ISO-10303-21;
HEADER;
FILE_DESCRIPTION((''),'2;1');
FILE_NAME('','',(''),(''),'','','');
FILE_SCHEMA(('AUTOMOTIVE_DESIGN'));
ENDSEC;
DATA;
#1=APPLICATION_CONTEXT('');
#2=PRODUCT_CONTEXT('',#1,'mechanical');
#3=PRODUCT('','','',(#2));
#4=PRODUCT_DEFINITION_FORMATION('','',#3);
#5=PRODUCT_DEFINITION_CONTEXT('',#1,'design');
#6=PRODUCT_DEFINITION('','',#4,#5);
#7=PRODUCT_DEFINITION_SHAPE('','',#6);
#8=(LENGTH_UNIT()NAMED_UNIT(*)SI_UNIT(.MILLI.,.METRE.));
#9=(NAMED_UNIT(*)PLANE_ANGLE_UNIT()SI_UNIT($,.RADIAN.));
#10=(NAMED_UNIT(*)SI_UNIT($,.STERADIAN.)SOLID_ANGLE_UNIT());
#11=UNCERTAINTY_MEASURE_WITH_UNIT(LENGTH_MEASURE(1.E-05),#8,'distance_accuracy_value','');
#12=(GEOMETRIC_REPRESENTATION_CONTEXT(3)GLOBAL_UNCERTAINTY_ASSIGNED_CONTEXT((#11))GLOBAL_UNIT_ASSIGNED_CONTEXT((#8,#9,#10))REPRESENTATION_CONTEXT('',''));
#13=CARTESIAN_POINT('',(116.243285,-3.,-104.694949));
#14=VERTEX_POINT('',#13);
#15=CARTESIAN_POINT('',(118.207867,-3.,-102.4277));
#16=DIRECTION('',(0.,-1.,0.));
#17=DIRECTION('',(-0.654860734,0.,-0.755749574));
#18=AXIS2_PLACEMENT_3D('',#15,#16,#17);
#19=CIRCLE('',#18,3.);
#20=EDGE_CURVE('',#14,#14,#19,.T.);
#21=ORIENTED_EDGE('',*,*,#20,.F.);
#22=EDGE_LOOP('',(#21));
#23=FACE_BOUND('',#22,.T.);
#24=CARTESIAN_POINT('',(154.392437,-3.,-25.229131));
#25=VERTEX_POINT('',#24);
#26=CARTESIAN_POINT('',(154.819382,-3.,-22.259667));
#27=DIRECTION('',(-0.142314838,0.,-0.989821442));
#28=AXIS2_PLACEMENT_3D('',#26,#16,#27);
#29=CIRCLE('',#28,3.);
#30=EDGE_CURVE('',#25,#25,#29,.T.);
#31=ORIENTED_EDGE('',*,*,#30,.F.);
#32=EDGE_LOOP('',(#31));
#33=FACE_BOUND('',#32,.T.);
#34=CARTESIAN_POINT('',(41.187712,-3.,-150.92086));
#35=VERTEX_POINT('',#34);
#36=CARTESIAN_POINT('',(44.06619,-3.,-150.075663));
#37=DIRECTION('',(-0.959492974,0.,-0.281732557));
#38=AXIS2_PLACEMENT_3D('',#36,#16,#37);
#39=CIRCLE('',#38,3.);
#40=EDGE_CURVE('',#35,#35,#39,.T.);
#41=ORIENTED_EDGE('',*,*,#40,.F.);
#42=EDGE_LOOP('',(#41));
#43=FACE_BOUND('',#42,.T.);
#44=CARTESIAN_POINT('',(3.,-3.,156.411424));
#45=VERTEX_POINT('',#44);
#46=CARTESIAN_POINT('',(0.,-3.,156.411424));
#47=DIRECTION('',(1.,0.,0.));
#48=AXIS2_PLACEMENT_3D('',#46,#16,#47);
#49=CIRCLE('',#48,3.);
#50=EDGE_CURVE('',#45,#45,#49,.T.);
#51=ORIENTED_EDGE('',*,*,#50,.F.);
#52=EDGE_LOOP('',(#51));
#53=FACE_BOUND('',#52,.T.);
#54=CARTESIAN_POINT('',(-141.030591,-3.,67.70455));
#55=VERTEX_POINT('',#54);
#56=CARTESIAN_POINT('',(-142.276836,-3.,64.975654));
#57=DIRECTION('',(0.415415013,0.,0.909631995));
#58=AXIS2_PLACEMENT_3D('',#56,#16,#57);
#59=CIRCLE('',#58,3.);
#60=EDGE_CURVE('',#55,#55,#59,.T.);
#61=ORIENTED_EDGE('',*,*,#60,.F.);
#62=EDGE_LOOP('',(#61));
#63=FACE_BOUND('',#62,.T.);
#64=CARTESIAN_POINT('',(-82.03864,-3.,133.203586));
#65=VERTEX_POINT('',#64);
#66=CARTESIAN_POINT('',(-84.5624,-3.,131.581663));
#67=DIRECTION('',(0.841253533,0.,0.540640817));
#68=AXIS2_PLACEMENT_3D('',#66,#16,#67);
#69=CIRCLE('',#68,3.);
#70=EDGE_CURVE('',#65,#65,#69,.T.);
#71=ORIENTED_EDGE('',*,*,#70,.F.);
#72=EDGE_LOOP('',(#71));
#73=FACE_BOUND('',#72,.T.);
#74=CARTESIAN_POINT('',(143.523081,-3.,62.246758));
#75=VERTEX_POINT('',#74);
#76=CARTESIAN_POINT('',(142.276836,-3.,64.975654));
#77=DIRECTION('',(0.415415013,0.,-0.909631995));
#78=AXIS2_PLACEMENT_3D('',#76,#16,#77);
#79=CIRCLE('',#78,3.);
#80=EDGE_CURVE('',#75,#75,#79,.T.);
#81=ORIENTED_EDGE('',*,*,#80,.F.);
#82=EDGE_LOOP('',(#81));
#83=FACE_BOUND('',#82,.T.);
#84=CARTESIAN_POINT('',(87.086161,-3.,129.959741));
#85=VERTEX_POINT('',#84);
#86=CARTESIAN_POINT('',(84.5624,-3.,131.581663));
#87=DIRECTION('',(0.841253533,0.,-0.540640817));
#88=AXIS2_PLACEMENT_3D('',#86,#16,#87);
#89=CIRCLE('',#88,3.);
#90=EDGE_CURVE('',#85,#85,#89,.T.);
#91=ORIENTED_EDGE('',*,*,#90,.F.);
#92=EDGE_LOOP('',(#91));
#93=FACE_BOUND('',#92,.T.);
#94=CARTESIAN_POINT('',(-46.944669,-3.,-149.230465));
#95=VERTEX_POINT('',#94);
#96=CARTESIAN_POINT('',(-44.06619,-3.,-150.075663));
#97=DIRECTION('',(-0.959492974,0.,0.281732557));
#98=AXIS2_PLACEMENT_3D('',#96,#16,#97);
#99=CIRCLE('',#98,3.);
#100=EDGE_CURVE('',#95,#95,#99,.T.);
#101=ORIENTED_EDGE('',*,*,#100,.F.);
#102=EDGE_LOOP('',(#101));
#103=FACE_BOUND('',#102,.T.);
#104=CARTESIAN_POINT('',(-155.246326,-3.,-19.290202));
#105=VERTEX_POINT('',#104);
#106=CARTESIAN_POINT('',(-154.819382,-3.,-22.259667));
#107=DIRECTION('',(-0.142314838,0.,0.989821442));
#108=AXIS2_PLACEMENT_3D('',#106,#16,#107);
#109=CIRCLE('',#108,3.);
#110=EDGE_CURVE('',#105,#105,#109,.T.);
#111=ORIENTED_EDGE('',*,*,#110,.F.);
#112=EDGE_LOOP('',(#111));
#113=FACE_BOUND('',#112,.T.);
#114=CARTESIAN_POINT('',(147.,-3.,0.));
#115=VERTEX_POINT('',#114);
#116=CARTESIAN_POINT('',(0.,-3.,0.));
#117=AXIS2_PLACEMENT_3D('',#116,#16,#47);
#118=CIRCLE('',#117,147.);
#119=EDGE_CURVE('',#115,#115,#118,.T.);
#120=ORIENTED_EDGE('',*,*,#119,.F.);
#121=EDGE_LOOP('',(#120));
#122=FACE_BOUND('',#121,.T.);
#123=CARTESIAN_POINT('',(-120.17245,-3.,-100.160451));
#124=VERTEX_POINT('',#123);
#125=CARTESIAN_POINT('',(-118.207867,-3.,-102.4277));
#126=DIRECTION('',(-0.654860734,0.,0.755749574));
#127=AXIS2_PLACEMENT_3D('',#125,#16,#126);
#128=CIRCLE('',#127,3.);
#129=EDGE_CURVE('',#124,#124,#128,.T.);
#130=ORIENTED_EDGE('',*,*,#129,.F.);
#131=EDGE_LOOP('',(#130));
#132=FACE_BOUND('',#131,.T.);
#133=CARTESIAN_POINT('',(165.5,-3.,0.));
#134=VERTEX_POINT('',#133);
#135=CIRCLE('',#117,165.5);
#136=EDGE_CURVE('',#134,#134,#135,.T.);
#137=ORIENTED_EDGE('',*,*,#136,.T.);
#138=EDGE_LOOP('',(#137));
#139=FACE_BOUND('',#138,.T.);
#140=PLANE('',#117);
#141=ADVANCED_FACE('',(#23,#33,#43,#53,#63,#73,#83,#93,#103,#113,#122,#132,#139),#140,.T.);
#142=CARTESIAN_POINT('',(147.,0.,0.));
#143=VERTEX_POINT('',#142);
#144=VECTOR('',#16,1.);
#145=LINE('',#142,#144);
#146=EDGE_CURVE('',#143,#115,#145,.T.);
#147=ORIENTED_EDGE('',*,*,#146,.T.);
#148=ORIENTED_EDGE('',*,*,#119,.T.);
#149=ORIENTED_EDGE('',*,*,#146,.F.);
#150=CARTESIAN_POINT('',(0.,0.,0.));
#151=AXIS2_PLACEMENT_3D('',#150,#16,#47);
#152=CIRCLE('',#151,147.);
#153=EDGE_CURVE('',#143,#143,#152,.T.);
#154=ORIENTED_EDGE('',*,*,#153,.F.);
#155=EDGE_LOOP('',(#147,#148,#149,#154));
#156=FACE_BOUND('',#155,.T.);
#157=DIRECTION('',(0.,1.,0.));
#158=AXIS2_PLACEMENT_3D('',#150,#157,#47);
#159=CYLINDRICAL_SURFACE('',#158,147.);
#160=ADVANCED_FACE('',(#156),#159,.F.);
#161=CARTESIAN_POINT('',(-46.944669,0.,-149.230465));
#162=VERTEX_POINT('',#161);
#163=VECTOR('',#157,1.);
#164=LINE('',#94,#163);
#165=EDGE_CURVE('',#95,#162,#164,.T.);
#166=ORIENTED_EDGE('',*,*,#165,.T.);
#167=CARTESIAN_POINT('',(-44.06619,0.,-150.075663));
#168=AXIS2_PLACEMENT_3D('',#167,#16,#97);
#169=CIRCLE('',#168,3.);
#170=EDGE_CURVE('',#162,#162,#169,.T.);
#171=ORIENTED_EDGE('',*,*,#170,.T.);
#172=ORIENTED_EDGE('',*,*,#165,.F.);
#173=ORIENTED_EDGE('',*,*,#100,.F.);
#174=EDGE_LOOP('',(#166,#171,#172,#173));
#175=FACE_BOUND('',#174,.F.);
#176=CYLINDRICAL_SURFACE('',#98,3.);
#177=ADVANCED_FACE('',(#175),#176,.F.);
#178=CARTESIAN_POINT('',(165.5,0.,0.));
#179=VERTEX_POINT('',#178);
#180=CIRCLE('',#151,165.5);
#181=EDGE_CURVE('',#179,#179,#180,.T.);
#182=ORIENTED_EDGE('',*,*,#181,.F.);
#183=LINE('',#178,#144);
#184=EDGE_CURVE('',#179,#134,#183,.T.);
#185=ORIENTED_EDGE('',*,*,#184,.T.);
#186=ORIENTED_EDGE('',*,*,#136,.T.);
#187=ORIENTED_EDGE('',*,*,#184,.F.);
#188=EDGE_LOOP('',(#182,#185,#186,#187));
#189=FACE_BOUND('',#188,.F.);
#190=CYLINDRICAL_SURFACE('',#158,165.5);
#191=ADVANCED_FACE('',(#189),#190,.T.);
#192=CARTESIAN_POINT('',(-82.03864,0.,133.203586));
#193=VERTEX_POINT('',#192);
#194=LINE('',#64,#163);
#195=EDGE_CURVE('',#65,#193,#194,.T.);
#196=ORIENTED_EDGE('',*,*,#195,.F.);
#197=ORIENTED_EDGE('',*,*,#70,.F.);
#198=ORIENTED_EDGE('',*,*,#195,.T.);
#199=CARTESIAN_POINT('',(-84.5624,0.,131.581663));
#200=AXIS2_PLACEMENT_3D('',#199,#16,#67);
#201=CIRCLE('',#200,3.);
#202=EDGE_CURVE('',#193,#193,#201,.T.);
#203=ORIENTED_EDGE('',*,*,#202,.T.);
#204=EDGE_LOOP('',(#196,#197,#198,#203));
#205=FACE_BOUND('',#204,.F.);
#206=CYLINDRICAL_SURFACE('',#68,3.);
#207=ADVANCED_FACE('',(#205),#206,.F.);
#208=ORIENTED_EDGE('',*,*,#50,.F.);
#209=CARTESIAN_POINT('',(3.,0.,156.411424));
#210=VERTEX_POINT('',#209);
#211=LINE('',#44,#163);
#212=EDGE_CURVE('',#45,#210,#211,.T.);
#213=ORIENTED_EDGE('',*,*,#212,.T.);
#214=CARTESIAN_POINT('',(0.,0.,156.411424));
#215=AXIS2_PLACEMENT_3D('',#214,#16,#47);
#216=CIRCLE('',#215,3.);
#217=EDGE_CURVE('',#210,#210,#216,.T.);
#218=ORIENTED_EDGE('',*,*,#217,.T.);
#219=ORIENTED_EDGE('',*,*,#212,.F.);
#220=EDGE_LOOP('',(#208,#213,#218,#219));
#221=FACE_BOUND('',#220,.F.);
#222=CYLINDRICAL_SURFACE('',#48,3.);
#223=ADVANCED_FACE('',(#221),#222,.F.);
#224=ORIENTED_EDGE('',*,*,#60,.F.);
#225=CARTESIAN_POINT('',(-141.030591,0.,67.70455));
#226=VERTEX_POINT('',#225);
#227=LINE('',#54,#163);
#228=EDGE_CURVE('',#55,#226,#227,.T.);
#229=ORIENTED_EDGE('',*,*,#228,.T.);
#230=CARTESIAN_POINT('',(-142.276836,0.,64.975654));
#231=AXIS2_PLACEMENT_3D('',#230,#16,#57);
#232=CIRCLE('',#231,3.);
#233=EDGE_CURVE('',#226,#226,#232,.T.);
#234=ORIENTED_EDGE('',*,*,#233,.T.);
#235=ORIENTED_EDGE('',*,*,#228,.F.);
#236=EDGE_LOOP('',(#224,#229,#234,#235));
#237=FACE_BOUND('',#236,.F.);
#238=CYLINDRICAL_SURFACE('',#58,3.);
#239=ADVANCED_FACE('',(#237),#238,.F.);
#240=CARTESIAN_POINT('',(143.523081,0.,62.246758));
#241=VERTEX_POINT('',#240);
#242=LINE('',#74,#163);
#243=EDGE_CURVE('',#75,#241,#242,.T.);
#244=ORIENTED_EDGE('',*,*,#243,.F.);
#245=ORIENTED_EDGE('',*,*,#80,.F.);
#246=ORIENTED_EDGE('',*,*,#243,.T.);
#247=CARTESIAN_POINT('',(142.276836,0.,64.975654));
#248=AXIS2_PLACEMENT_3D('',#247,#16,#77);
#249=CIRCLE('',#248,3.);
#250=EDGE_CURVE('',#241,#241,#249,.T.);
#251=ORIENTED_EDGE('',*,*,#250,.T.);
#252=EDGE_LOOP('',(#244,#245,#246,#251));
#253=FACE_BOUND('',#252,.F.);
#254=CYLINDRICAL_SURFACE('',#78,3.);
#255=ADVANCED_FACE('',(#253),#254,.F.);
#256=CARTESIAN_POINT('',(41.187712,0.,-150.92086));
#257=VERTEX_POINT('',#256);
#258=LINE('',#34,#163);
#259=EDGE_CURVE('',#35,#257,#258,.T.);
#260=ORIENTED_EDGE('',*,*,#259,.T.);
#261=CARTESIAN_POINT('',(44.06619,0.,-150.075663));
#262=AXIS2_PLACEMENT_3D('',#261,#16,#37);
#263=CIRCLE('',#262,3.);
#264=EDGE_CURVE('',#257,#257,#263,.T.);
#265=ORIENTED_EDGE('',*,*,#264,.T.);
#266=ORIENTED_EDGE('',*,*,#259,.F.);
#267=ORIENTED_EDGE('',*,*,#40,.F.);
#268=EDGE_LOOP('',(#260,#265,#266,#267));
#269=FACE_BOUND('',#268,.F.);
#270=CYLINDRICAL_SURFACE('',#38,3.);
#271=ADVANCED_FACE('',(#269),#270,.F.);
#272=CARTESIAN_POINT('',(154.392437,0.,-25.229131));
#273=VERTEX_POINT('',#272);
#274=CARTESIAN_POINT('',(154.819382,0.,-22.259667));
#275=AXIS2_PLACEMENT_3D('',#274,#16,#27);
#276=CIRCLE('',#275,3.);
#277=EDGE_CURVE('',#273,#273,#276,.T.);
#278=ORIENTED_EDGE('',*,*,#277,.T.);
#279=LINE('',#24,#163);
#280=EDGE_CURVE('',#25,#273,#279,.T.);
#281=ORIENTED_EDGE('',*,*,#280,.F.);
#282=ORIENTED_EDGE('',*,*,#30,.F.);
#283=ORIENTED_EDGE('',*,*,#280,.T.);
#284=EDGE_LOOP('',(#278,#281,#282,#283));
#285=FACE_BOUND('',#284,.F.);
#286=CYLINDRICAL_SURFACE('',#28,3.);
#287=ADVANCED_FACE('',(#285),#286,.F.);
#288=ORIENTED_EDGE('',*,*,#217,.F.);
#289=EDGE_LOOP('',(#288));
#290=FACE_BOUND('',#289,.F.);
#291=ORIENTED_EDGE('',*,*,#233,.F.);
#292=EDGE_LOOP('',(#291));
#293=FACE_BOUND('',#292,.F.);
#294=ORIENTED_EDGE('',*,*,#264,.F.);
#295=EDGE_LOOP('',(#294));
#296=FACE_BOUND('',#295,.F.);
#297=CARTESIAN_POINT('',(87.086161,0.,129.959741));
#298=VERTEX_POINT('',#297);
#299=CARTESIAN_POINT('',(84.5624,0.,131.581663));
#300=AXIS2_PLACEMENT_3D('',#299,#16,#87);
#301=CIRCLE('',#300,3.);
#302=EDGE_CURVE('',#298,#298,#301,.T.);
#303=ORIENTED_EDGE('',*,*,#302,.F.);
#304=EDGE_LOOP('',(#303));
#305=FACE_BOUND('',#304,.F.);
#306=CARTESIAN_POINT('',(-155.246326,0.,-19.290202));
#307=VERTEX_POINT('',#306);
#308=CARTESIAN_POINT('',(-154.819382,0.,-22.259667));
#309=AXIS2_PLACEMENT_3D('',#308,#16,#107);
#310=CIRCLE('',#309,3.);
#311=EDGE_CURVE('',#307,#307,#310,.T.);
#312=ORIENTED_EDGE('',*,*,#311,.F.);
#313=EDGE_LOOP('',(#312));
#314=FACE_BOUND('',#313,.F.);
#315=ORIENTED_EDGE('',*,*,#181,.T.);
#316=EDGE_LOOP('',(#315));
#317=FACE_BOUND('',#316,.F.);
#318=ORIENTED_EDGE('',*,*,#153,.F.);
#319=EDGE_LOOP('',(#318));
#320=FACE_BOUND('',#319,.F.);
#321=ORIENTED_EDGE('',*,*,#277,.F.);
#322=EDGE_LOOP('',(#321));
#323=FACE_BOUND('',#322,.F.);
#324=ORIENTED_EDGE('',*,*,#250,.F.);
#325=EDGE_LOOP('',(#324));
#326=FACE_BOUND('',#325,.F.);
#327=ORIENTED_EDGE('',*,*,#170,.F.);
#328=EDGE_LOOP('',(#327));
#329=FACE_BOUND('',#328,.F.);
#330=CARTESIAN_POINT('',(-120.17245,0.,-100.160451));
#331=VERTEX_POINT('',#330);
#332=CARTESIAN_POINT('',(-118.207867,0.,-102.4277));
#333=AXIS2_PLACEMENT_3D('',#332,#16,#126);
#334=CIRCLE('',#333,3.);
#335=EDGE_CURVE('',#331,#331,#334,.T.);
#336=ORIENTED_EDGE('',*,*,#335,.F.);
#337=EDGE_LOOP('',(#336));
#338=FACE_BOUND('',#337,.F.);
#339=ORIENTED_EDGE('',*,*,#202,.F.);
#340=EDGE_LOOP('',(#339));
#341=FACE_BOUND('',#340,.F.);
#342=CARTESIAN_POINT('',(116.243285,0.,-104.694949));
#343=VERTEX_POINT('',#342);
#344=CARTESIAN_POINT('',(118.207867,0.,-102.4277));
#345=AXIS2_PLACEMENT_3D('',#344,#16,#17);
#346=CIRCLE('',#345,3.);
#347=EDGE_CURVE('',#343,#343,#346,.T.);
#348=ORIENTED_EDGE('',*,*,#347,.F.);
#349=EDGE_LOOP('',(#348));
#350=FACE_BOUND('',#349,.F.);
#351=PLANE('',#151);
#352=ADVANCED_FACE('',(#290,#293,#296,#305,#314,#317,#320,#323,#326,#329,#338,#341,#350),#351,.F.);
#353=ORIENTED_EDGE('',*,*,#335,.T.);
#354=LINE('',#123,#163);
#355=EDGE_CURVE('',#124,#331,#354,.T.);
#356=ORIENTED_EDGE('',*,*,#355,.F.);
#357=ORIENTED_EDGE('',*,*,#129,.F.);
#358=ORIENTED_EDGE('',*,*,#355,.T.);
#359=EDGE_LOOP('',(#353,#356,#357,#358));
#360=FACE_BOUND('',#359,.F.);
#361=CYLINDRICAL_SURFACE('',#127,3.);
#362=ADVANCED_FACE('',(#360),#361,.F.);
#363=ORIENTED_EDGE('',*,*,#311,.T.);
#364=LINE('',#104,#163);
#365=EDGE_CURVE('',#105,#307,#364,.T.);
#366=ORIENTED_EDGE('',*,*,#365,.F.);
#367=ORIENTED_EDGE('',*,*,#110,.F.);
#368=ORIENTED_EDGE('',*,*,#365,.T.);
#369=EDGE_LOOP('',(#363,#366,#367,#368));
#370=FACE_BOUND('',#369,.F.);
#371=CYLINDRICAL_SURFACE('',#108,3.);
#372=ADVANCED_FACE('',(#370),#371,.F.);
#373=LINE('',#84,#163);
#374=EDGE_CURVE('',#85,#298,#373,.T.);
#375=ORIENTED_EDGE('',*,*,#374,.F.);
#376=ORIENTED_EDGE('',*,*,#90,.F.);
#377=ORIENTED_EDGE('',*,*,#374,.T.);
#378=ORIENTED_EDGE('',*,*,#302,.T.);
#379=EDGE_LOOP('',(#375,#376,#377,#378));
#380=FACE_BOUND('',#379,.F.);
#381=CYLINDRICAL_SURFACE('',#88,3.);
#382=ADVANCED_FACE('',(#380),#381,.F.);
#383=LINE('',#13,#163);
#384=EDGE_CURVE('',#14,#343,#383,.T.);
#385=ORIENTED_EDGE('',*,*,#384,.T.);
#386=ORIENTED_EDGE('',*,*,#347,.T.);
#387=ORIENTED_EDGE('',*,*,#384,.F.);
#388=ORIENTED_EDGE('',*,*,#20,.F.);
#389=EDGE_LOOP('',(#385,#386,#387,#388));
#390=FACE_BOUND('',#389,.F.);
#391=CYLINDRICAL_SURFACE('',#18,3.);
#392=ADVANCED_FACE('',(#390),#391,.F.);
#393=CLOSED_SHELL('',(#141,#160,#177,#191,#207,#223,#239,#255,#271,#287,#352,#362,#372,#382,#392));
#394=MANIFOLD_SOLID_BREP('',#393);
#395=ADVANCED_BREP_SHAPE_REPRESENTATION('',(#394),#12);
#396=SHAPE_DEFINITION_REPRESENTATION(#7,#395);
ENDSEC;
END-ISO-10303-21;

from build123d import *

# Parameters (mm, degrees)
F0_R            = 165.5
F0_R_2          = 147
F1_DEPTH        = 3
F2_R            = 3
F3_DEPTH        = 25
F3_COPIES_COUNT = 11


# Not quite as in the source:
# - a pattern or mirror of a feature is missing from the dataset's text; its kind, count and spacing are read off the source's solid


with BuildPart() as f1:
    # F0 (on Front) → F1 (new body)
    with BuildSketch(Plane.XZ):
        Circle(F0_R)
        Circle(F0_R_2, mode=Mode.SUBTRACT)
    extrude(amount=F1_DEPTH)

    # F2 (on face) → F3 (cut)
    with BuildSketch(Plane.XZ.offset(3)):
        with Locations((0, 156.4114242792)):
            Circle(F2_R)
    f3 = extrude(amount=-F3_DEPTH, mode=Mode.SUBTRACT)

    # F3_copies: F3 ×11 about axis
    f3_copies_axis = Axis((0, 0, 0), (0, 1, 0))
    for i in range(1, F3_COPIES_COUNT):
        add(f3.rotate(f3_copies_axis, i * 360 / F3_COPIES_COUNT), mode=Mode.SUBTRACT)


solid = f1.part
